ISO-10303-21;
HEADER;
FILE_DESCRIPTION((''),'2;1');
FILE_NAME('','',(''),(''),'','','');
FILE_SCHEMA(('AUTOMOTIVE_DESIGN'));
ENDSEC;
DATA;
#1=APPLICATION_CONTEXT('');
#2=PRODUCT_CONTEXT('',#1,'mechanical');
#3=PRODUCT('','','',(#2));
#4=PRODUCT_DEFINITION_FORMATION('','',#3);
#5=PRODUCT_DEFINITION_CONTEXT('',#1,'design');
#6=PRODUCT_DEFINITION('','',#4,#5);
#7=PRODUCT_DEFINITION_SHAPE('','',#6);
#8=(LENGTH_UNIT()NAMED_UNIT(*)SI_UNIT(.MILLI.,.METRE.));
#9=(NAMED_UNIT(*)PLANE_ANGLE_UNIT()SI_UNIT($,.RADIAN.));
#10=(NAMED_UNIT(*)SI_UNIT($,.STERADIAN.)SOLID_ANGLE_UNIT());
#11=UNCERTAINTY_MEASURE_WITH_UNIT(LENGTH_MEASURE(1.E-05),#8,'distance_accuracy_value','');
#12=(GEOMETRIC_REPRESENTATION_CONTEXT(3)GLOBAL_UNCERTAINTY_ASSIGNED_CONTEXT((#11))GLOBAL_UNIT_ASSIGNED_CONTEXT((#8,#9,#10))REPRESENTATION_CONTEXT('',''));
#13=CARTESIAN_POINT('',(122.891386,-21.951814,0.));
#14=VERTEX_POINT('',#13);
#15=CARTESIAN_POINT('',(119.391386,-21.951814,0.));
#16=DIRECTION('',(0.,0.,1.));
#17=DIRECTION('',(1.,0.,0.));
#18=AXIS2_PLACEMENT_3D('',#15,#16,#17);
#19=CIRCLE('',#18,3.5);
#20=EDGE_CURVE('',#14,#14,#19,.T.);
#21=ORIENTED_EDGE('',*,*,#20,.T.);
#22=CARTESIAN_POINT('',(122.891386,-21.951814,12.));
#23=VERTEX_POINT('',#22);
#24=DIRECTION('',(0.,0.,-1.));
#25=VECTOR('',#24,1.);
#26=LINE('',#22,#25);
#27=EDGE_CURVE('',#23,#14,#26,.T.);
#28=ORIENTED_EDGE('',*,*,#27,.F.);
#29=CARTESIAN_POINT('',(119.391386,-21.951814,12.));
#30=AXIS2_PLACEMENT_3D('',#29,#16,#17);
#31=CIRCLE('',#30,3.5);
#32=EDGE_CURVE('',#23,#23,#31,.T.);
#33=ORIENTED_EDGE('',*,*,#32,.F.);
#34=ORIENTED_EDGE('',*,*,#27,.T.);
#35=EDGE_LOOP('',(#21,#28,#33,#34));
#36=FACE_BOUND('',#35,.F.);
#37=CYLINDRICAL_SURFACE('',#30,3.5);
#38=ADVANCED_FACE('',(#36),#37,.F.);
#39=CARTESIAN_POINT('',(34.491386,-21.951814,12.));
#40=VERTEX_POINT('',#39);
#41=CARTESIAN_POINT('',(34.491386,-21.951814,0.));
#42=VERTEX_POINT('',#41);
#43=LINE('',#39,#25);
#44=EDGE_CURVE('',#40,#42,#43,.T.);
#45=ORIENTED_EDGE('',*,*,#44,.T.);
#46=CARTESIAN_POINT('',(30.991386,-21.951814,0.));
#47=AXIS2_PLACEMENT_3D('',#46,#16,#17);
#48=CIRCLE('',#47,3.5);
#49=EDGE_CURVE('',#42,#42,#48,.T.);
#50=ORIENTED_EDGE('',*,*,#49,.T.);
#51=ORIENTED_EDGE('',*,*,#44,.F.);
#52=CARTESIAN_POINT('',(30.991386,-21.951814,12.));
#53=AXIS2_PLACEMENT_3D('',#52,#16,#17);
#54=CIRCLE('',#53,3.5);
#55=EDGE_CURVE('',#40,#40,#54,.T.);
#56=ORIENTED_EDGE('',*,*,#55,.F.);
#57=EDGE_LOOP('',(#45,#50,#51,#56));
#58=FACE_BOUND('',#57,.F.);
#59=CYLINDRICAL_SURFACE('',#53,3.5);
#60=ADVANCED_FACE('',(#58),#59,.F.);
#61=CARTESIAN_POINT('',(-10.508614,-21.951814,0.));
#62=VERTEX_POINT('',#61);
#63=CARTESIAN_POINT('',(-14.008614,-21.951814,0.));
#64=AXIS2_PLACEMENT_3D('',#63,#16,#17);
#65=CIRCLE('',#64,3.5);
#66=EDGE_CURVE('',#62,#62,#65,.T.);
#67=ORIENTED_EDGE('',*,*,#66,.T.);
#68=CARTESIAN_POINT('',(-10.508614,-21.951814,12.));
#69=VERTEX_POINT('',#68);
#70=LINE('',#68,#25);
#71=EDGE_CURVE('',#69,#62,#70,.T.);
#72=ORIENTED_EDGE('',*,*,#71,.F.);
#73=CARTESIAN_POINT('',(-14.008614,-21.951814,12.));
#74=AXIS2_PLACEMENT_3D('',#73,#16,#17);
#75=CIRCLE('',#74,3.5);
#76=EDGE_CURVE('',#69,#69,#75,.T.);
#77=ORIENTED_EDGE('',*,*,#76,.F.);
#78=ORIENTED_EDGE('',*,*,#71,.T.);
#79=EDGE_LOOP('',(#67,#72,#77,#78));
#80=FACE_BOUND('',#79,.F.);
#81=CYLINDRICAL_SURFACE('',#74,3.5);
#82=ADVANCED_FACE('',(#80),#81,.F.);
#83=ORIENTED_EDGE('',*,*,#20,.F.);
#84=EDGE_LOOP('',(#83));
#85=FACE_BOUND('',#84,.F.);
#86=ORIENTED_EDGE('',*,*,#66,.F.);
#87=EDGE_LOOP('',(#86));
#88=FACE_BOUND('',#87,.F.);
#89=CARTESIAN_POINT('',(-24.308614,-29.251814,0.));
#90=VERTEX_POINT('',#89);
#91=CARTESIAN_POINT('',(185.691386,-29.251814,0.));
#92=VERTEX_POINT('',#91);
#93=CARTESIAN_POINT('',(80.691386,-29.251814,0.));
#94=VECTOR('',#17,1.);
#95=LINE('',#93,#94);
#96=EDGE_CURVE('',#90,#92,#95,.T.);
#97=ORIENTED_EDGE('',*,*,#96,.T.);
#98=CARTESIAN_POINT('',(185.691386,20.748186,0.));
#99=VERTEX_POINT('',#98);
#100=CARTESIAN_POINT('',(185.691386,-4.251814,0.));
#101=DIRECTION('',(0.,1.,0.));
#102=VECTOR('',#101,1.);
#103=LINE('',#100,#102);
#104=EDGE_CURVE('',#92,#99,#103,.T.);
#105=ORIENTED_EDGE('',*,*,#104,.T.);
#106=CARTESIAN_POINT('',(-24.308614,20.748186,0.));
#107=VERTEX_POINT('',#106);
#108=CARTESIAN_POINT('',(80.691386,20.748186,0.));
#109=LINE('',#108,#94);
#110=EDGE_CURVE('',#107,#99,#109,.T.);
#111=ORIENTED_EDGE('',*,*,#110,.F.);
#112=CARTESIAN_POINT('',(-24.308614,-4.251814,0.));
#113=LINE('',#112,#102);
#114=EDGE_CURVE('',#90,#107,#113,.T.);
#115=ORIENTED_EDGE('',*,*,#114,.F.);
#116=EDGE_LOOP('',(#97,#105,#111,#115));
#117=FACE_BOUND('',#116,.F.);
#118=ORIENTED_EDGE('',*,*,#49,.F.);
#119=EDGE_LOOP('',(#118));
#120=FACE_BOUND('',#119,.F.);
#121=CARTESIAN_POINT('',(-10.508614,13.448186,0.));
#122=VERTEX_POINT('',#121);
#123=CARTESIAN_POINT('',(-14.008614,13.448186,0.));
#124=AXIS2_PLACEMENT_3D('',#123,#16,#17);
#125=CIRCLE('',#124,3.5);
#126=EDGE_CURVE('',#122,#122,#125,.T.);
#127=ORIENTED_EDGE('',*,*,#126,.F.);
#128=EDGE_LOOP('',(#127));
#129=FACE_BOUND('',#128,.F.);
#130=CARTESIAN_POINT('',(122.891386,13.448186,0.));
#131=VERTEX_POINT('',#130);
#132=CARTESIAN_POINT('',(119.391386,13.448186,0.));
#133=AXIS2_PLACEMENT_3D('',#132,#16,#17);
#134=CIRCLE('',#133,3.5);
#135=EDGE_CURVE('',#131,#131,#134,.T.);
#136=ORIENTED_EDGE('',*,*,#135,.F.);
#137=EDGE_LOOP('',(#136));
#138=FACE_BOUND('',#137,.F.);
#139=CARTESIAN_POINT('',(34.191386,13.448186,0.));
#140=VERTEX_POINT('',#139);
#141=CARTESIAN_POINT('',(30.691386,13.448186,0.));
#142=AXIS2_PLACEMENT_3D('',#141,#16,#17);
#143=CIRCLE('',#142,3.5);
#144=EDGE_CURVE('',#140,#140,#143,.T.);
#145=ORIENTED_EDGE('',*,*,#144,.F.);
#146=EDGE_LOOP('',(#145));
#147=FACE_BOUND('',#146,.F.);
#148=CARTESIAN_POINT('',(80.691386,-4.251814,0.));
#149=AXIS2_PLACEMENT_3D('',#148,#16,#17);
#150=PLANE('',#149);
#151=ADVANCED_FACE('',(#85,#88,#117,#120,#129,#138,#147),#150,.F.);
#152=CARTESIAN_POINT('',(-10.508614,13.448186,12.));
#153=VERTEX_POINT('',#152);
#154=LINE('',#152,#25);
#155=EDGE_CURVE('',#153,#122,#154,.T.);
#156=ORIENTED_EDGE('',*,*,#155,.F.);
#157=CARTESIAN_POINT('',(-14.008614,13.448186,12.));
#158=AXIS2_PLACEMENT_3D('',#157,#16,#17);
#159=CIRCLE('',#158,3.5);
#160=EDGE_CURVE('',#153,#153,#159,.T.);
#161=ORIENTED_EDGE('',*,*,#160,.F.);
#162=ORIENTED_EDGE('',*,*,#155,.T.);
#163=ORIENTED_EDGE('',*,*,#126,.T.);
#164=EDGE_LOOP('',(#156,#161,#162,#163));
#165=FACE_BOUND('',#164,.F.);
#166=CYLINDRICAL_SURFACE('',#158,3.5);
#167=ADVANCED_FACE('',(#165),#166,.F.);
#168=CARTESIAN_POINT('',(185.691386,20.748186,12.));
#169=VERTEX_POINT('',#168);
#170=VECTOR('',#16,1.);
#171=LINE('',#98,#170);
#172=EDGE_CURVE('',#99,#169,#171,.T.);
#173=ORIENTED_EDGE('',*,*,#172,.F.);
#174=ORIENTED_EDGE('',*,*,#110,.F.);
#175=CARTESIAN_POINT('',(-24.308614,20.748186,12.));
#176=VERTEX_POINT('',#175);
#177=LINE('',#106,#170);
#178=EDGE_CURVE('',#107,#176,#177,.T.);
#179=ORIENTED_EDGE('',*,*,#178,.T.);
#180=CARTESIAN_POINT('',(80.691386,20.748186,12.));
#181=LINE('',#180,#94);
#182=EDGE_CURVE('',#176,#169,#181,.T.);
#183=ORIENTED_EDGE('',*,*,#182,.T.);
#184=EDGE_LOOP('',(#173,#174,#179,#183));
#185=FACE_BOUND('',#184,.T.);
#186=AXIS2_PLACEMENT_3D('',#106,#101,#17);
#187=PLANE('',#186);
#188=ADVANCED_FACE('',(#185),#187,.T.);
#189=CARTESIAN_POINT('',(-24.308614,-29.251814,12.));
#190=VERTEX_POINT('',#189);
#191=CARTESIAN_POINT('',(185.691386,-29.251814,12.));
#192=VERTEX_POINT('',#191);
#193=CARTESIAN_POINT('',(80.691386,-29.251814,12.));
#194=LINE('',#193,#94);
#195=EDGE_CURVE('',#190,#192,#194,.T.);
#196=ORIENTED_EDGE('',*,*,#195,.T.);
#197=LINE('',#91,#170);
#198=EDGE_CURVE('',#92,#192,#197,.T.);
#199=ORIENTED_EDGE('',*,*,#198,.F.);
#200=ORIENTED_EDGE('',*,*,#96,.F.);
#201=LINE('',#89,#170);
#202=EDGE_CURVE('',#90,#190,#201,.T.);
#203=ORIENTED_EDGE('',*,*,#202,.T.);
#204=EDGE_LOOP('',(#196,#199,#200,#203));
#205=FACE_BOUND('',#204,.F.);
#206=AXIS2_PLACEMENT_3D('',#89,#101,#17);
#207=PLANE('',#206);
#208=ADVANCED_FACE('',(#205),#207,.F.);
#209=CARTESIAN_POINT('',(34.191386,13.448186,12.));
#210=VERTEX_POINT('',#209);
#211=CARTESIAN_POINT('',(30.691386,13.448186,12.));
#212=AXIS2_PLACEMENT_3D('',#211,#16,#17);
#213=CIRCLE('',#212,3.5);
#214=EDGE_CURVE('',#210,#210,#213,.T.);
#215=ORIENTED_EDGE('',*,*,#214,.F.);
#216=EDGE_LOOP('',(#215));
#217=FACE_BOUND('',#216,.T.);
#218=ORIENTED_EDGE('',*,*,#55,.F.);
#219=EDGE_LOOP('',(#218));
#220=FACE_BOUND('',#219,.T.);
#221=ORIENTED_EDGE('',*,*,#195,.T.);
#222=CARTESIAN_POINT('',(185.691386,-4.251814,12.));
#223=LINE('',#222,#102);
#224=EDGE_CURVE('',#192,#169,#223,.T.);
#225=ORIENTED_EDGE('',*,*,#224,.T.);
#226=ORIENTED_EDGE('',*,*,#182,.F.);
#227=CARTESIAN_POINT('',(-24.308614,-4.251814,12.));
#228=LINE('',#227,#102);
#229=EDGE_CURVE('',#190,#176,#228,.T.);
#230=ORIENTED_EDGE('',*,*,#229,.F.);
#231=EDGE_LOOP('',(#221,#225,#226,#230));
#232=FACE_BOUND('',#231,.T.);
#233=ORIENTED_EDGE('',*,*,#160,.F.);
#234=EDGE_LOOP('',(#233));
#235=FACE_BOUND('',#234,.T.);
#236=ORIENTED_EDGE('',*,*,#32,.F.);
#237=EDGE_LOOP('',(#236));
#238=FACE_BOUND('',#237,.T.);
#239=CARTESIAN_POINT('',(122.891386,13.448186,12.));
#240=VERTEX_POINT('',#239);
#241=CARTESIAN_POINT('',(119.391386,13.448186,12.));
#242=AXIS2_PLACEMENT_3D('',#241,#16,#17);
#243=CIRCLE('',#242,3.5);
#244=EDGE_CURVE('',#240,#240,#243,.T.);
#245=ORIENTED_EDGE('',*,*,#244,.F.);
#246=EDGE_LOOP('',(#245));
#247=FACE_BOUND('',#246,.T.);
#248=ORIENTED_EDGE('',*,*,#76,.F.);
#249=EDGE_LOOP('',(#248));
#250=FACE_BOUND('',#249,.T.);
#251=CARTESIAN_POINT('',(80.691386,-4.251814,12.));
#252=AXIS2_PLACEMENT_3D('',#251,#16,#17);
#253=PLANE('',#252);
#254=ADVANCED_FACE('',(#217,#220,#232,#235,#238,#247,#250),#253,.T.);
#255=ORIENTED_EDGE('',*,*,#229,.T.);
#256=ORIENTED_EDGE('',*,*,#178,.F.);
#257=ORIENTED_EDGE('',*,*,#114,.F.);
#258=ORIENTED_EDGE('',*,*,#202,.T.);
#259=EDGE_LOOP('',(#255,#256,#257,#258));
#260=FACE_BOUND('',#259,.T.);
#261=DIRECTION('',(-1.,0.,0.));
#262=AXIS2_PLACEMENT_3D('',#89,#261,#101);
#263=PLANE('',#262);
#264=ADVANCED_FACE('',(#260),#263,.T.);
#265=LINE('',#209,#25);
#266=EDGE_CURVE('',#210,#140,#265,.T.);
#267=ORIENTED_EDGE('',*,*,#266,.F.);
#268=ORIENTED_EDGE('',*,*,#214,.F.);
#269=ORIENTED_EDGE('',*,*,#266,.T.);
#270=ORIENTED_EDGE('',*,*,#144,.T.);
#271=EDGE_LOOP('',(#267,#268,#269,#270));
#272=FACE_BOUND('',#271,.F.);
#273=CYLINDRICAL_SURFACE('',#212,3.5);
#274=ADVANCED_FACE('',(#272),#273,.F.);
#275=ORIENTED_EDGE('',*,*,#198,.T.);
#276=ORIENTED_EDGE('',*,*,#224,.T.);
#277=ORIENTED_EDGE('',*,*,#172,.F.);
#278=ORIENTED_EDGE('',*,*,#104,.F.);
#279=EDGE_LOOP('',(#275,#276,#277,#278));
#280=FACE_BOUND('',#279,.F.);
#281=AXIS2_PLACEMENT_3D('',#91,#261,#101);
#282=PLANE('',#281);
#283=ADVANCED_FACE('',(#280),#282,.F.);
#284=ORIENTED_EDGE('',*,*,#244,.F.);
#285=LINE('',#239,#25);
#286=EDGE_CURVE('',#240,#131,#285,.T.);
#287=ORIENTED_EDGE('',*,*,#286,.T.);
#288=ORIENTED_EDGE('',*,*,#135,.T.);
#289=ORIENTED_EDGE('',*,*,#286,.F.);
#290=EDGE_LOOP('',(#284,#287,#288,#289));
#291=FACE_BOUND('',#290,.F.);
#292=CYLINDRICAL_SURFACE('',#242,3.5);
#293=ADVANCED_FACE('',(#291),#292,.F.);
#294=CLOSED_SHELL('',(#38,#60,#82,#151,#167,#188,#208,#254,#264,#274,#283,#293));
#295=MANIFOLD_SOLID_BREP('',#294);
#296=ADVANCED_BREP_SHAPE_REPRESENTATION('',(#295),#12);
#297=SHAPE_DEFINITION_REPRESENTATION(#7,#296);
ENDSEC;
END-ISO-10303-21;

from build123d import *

# Parameters (mm, degrees)
F0_W     = 210
F0_H     = 50
F1_DEPTH = 12
F2_R     = 3.5
F3_DEPTH = 25
F4_R     = 3.5
F5_DEPTH = 25


# Not quite as in the source:
# - a feature names something its author has since deleted; it is built from what else it names


with BuildPart() as f1:
    # F0 (on Top) → F1 (new body)
    with BuildSketch(Plane.XY):
        with Locations((80.6913864613, -4.2518138885)):
            Rectangle(F0_W, F0_H)
    extrude(amount=F1_DEPTH)

    # F2 (on face) → F3 (cut)
    with BuildSketch(Plane.XY.offset(12)):
        with Locations((119.3913864613, 13.4481861115)):
            Circle(F2_R)
        with Locations((119.3913864613, -21.9518138885)):
            Circle(F2_R)
        with Locations((30.9913864613, -21.9518138885)):
            Circle(F2_R)
        with Locations((-14.0086135387, 13.4481861115)):
            Circle(F2_R)
        with Locations((-14.0086135387, -21.9518138885)):
            Circle(F2_R)
    extrude(amount=-F3_DEPTH, mode=Mode.SUBTRACT)

    # F4 (on face) → F5 (cut)
    with BuildSketch(Plane.XY.offset(12)):
        with Locations((30.6913864613, 13.4481861115)):
            Circle(F4_R)
    extrude(amount=-F5_DEPTH, mode=Mode.SUBTRACT)


solid = f1.part
